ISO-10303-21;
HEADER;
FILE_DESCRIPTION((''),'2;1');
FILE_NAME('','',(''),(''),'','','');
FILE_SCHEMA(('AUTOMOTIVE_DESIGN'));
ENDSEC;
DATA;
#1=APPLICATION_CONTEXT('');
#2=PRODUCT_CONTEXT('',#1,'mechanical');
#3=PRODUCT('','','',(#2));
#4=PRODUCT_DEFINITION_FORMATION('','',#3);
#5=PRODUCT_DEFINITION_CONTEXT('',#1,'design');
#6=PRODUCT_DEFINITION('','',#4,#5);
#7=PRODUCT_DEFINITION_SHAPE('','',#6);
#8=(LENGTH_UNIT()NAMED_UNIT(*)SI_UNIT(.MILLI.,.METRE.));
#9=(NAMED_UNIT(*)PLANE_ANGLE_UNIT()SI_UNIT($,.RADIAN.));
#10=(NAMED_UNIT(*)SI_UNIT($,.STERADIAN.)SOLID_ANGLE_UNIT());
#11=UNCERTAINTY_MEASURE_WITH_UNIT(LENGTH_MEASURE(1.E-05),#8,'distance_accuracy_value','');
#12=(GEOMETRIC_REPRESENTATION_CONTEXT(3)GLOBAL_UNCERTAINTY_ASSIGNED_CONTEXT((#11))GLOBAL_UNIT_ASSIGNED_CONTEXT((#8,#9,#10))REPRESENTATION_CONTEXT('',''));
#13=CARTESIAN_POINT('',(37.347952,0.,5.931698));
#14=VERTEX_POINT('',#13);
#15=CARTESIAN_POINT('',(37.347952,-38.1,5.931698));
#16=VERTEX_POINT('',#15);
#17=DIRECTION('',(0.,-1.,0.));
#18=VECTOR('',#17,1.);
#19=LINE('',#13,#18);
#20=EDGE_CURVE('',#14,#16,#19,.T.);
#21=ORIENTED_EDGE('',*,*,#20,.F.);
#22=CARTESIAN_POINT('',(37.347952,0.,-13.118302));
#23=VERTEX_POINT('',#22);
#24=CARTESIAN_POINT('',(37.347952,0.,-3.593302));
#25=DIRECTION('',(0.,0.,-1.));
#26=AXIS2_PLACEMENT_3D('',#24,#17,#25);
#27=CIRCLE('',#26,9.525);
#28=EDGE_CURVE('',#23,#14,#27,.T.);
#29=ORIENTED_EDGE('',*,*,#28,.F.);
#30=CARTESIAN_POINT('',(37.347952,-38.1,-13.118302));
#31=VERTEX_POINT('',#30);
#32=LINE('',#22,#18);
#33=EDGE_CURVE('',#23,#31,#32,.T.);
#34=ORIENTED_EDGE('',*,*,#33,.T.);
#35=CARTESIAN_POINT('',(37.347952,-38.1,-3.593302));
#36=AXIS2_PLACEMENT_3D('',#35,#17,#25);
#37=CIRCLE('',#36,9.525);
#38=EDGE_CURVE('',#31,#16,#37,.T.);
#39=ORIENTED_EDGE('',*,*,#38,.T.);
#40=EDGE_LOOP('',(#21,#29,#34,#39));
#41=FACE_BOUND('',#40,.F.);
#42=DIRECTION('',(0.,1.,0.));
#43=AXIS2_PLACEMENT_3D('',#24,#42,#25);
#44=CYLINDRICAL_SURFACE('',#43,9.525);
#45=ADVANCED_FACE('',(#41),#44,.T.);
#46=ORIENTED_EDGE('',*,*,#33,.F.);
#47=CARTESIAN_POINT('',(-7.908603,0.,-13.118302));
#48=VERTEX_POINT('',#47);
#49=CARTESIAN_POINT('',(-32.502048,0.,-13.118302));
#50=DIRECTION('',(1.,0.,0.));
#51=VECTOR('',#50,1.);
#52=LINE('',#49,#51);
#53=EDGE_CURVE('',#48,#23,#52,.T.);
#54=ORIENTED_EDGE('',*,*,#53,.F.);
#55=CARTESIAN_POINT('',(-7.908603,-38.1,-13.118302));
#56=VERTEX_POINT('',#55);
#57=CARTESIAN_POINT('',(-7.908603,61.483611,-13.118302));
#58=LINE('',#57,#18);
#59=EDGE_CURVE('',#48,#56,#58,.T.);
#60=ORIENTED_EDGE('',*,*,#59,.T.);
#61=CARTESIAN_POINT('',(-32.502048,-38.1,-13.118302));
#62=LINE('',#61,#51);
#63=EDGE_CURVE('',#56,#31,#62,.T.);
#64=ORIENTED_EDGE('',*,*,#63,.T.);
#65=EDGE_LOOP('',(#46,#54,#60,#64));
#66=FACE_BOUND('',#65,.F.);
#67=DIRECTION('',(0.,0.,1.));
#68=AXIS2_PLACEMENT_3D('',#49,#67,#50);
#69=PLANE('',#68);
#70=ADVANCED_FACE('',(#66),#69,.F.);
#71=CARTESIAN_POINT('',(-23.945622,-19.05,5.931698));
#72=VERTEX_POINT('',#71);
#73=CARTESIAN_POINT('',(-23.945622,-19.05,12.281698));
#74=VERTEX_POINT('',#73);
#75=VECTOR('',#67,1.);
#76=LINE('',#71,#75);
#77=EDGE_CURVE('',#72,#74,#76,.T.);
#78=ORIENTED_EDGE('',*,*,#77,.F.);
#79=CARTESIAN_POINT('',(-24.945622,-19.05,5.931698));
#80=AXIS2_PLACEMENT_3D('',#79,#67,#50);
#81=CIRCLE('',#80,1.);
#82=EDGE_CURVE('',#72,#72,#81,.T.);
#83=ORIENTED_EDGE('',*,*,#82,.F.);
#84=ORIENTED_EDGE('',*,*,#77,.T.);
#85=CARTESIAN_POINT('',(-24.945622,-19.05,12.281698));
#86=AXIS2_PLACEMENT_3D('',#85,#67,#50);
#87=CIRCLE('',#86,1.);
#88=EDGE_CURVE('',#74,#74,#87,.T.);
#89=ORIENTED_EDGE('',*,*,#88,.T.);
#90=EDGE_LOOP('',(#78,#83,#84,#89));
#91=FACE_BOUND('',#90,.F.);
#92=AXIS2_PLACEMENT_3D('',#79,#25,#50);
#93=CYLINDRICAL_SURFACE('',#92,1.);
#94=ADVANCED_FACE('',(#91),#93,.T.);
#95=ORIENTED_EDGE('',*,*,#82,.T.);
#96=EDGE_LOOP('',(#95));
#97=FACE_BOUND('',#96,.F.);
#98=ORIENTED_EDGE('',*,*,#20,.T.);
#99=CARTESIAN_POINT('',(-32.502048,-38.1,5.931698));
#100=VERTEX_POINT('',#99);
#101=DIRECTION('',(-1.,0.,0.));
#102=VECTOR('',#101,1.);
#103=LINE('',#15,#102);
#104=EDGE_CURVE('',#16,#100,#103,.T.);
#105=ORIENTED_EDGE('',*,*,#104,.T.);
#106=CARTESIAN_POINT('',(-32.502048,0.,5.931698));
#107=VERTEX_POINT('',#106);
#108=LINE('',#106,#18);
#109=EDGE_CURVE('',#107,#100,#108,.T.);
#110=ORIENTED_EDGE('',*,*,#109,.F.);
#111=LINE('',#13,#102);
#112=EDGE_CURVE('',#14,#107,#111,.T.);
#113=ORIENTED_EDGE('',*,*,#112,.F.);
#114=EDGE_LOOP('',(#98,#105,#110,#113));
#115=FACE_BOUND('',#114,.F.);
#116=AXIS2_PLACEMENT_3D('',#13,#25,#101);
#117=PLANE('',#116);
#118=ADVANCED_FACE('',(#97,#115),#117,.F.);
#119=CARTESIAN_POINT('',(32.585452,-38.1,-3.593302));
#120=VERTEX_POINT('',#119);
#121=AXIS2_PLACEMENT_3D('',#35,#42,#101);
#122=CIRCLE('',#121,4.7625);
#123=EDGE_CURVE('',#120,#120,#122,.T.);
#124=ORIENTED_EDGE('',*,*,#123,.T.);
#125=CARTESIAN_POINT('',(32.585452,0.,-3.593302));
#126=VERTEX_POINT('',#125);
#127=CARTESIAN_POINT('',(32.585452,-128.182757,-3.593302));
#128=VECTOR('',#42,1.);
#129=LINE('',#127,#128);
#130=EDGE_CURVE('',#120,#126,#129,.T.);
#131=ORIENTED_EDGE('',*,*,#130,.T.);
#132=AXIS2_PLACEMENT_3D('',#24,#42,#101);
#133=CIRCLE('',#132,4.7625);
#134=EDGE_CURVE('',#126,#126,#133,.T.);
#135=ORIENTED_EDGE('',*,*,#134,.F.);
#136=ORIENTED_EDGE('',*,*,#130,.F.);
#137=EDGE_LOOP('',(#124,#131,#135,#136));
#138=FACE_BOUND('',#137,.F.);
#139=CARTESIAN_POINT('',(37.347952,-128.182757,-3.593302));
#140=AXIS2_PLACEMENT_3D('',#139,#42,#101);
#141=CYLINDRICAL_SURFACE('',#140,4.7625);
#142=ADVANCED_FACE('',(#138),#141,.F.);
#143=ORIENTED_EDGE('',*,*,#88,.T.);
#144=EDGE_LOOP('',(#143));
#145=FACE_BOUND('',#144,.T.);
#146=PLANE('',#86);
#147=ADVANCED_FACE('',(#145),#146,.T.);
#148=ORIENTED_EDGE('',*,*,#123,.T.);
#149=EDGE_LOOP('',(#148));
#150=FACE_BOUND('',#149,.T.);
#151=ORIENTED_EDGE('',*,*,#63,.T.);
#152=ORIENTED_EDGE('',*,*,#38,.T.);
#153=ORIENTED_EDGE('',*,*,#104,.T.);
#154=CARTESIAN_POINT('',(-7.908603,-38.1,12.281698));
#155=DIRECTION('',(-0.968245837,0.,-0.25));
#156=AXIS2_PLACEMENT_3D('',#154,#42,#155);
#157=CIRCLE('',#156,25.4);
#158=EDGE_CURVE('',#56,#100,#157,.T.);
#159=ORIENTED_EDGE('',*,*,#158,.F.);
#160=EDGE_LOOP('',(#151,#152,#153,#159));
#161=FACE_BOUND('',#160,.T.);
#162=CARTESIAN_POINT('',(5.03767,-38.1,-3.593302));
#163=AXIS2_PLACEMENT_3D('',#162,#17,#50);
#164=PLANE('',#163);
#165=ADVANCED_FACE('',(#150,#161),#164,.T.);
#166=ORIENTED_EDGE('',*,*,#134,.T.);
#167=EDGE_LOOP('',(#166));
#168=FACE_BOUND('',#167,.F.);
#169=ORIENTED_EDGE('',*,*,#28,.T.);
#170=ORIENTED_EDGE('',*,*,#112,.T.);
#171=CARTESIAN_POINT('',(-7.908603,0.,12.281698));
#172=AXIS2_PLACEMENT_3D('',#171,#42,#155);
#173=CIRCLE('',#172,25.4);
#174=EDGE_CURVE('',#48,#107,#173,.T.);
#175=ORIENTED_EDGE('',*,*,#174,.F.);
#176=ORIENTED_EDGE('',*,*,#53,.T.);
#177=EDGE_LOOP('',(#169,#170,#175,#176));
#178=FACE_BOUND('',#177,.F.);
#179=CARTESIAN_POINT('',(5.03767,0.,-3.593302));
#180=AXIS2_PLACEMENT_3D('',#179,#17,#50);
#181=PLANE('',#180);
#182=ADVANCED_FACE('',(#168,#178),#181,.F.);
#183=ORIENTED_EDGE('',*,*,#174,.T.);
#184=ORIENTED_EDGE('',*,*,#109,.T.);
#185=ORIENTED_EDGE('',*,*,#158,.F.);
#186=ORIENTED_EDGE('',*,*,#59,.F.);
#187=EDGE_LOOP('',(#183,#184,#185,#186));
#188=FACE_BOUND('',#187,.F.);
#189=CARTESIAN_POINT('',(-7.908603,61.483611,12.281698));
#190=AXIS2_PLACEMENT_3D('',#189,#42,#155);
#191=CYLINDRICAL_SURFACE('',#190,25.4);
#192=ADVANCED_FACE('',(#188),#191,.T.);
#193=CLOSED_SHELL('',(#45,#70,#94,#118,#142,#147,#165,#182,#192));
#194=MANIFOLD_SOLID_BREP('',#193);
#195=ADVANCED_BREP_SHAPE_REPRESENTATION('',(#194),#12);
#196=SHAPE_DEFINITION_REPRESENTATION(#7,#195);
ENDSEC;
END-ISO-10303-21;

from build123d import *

# Parameters (mm, degrees)
F1_DEPTH    = 38.1
F2_T1_DEPTH = 161.0672212421
F4_D        = 9.525
F5_R        = 1
F6_DEPTH    = 6.35


# Not quite as in the source:
# - a fillet or chamfer that OpenCascade refuses, or shapes differently, is made with other operations: its cross-section is extruded or revolved along the edge and cut away or added


with BuildPart() as f1:
    # F0 (on Front) → F1 (new body)
    with BuildSketch(Plane.XZ):
        with BuildLine():
            Line((37.3479522824, 5.9316984817), (-32.5020477176, 5.9316984817))
            Line((-32.5020477176, 5.9316984817), (-32.5020477176, -13.1183015183))
            Line((-32.5020477176, -13.1183015183), (37.3479522824, -13.1183015183))
            ThreePointArc((37.3479522824, -13.1183015183), (46.8729522824, -3.5933015183), (37.3479522824, 5.9316984817))
        make_face()
    extrude(amount=F1_DEPTH)

    # F2: fillet of radius 25.4 on 1 edges, made by hand

    # F2_s2 → F2_t1 (cut)
    with BuildSketch(Plane.XZ.offset(-61.483610621)):
        with BuildLine():
            ThreePointArc((-32.5020477176, 5.9316984817), (-23.4628633358, -7.7987646603), (-7.9086034692, -13.1183015183))
            Line((-7.9086034692, -13.1183015183), (-32.5020477176, -13.1183015183))
            Line((-32.5020477176, -13.1183015183), (-32.5020477176, 5.9316984817))
        make_face()
    extrude(amount=F2_T1_DEPTH, mode=Mode.SUBTRACT)

    # F4 (through all)
    with Locations(Plane.XZ.offset(38.1)):
        with Locations((37.3479522824, -3.5933015183)):
            Hole(F4_D / 2)

    # F5 (on face) → F6 (join)
    with BuildSketch(Plane.XY.offset(5.9316984817)):
        with Locations((-24.94562231, -19.05)):
            Circle(F5_R)
    extrude(amount=F6_DEPTH)


solid = f1.part
